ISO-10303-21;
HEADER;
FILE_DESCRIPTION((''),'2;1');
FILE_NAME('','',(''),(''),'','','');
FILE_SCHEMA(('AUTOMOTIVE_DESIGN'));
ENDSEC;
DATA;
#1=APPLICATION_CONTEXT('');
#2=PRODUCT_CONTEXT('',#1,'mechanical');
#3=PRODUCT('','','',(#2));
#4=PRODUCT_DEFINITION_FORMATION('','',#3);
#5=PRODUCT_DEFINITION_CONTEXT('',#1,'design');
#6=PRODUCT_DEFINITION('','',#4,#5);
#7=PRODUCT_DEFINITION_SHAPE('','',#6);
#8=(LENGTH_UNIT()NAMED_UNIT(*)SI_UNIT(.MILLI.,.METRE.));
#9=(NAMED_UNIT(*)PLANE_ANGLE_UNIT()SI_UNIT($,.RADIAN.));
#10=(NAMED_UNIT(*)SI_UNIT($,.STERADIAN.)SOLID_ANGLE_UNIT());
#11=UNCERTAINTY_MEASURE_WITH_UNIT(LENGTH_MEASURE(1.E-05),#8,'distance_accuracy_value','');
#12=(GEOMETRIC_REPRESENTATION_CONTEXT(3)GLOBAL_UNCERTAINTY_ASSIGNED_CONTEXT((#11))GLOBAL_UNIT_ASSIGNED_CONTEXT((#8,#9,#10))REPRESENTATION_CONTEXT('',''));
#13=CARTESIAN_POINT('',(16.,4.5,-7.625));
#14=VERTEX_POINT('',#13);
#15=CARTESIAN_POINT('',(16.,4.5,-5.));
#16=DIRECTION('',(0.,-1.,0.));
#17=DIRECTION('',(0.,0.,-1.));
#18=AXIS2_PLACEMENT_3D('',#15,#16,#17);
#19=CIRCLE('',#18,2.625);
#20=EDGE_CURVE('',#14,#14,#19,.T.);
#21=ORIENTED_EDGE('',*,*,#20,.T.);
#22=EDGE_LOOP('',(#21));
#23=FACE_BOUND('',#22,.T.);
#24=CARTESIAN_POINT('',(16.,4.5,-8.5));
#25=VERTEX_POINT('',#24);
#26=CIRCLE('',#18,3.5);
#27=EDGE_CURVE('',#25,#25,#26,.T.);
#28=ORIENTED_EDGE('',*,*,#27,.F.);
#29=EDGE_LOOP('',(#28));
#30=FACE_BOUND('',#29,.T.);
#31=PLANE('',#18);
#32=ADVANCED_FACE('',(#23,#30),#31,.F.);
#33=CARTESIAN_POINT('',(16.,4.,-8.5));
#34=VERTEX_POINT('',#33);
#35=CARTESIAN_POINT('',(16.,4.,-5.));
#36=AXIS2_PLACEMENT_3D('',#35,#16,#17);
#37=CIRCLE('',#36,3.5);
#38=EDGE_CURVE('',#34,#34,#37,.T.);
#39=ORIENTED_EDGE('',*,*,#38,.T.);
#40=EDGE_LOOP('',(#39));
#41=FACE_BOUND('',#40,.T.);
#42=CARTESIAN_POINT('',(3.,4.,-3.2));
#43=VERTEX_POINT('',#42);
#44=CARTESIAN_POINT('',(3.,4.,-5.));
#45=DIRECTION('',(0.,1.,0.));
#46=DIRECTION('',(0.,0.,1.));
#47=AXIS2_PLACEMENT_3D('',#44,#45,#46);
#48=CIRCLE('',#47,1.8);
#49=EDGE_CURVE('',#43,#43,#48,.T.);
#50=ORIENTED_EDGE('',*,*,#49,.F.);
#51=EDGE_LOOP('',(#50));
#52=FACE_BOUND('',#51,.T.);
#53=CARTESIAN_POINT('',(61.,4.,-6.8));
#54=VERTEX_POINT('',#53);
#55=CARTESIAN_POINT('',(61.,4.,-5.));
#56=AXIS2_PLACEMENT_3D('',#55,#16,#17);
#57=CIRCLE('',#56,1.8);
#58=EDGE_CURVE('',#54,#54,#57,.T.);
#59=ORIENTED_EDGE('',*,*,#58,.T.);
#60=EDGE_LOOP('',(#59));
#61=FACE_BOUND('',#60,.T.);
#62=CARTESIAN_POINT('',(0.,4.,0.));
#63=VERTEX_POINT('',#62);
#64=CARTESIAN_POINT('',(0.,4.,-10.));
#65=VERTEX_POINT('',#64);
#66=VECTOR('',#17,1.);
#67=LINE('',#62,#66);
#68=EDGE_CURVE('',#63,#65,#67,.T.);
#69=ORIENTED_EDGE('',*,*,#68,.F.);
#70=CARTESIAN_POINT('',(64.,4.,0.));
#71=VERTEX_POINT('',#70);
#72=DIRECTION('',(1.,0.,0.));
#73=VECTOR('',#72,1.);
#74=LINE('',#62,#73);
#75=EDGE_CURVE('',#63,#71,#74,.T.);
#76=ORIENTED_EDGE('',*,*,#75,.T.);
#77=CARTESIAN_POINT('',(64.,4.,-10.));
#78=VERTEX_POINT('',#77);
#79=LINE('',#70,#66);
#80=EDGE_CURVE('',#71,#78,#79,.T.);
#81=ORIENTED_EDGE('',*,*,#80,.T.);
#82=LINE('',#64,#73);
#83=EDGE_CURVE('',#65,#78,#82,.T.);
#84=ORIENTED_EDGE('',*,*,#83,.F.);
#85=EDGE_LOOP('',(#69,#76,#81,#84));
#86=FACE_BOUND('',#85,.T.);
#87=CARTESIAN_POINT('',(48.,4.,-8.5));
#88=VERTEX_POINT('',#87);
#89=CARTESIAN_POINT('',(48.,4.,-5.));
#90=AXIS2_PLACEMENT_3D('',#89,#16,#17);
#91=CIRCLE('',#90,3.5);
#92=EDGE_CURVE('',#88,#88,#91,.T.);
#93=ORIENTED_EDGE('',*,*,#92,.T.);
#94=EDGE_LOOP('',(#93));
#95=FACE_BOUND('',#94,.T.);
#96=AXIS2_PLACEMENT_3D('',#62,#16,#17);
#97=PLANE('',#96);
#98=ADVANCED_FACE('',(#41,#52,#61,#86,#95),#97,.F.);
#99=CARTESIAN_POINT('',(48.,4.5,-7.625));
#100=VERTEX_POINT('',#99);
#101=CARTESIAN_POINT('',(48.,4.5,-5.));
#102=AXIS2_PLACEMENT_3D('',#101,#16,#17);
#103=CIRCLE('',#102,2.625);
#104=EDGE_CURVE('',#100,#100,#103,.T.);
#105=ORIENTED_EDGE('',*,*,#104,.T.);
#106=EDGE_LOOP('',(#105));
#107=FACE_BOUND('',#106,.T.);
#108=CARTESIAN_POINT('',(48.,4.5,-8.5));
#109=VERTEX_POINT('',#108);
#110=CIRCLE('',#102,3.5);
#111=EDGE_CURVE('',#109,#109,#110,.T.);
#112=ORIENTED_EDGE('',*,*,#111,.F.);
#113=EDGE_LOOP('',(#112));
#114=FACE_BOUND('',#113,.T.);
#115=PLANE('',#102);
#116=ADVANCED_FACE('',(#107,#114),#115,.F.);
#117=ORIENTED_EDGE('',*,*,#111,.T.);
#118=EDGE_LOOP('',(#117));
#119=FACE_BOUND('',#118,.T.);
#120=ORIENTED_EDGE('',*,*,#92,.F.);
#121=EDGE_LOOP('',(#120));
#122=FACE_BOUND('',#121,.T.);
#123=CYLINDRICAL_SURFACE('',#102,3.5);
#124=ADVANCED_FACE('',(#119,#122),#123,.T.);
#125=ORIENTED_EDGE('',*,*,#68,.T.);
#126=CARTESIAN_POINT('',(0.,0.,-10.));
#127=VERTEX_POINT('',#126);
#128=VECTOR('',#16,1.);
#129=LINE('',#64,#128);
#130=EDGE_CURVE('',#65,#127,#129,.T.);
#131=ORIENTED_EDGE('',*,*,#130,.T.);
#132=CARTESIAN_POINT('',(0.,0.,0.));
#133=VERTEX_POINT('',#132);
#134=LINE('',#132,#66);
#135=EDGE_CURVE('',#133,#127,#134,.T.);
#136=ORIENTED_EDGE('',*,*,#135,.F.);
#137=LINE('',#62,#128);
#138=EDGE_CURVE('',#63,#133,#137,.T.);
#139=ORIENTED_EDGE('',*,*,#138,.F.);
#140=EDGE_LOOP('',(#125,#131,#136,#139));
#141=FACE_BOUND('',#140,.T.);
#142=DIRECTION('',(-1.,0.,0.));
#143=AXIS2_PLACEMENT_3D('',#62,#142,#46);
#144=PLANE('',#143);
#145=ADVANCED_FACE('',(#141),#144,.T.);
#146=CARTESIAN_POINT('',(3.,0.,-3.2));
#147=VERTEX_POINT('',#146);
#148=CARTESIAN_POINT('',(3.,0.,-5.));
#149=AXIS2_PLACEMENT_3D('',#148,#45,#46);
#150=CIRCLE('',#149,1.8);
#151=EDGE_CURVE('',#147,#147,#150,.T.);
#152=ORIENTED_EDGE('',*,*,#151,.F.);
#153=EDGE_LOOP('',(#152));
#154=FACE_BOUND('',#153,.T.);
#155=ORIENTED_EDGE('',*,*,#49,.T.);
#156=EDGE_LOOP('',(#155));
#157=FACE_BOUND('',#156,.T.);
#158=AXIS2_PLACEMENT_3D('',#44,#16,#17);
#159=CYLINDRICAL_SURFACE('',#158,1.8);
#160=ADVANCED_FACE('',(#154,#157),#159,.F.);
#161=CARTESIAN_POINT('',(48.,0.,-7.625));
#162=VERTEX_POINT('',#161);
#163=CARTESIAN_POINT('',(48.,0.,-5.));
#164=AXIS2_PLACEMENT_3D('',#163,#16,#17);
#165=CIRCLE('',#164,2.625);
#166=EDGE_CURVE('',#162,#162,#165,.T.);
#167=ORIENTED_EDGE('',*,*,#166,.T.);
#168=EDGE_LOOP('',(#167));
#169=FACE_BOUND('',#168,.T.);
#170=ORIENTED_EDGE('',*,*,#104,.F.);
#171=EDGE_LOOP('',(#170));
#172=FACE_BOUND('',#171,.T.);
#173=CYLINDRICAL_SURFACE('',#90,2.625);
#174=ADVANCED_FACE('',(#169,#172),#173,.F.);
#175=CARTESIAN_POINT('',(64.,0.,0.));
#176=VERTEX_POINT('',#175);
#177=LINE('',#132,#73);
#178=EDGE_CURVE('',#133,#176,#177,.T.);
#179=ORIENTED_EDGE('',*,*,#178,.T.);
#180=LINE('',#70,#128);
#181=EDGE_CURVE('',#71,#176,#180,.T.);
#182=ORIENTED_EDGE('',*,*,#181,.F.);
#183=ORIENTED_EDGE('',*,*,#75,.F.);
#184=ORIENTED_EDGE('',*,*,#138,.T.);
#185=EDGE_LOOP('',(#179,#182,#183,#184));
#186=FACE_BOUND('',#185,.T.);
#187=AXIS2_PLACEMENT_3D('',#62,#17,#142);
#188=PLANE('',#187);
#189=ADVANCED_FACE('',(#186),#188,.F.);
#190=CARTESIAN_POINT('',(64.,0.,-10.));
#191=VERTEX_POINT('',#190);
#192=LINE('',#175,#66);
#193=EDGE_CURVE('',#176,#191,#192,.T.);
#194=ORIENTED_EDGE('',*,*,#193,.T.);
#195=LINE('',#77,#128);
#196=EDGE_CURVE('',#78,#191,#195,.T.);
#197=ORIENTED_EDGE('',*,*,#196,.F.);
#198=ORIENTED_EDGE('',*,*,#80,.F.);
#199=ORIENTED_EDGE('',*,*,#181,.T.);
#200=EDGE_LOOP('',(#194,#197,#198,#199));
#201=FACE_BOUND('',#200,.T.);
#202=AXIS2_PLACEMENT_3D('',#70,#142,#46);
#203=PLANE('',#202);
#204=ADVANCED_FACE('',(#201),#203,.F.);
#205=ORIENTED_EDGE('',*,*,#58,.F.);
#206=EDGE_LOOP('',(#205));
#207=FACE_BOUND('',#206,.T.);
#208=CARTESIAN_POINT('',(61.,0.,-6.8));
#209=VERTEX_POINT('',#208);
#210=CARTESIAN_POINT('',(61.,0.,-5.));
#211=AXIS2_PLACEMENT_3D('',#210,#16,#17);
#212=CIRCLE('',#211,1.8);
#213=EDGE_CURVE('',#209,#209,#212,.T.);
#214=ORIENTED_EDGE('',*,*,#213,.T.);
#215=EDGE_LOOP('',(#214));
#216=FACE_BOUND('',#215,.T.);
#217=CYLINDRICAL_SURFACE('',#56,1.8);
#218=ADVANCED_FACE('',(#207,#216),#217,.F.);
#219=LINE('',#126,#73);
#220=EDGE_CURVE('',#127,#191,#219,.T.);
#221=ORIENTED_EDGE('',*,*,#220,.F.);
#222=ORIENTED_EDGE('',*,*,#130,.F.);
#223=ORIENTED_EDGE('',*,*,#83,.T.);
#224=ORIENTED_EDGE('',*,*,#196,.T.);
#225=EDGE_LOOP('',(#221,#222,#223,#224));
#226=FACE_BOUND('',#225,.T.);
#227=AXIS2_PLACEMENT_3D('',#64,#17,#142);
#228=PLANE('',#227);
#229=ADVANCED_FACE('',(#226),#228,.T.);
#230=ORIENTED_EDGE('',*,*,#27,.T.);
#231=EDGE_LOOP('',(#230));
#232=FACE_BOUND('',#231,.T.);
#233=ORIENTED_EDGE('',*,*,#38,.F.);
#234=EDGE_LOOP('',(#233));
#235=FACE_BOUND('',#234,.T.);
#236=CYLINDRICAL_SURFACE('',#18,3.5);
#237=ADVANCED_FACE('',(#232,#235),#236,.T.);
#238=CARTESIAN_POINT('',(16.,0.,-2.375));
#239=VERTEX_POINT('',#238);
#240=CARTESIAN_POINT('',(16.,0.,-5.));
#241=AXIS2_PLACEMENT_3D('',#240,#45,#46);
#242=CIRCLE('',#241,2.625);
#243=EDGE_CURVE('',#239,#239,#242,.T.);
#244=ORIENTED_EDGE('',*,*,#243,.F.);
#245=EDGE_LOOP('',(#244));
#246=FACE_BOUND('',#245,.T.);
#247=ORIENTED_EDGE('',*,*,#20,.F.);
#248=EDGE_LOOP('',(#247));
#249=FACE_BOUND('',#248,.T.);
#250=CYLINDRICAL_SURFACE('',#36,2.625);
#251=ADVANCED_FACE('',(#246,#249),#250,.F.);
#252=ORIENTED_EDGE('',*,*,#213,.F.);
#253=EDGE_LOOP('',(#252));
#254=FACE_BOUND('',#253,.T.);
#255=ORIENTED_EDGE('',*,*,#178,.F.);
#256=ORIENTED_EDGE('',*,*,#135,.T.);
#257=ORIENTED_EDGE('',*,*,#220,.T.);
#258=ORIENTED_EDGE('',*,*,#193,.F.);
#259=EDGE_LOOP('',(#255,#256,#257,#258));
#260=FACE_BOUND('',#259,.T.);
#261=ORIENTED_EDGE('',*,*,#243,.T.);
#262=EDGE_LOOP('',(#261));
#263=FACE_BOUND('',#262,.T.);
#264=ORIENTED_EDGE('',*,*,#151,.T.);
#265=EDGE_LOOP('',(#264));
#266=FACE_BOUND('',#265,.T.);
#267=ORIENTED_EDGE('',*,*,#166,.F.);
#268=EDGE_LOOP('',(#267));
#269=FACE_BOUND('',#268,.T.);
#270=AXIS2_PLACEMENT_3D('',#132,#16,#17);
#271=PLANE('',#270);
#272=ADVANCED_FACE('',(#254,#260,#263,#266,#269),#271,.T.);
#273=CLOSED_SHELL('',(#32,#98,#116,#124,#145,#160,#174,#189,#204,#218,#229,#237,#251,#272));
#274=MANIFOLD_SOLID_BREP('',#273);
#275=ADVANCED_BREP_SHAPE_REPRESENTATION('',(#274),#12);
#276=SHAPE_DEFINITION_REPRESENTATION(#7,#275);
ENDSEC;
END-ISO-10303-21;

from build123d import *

# Parameters (mm, degrees)
SKETCH1_W                 = 64
SKETCH1_H                 = 10
SKETCH1_R                 = 1.8
SKETCH1_R_2               = 2.625
BOSS_EXTRUDE1_DEPTH       = 4
BOSS_EXTRUDE2_START       = 4
BOSS_EXTRUDE2_OUTLINE_R   = 3.5
BOSS_EXTRUDE2_OUTLINE_R_2 = 2.625
BOSS_EXTRUDE2_DEPTH       = 0.5


# Read off the part's stored shape, not the designer's step: Boss-Extrude2
with BuildPart() as part:
    # Sketch1 → Boss-Extrude1 (new body)
    with BuildSketch(Plane(origin=(0, 0, 0), x_dir=(1, 0, 0), z_dir=(0, 1, 0))):
        with Locations((32, 5)):
            Rectangle(SKETCH1_W, SKETCH1_H)
        with Locations(Location((3, 5, 0), (0, 0, 270))):
            Circle(SKETCH1_R, mode=Mode.SUBTRACT)
        with Locations(Location((16, 5, 0), (0, 0, 270))):
            Circle(SKETCH1_R_2, mode=Mode.SUBTRACT)
        with Locations(Location((61, 5, 0), (0, 0, 90))):
            Circle(SKETCH1_R, mode=Mode.SUBTRACT)
        with Locations(Location((48, 5, 0), (0, 0, 90))):
            Circle(SKETCH1_R_2, mode=Mode.SUBTRACT)
    extrude(amount=BOSS_EXTRUDE1_DEPTH)

    # Boss-Extrude2 outline → Boss-Extrude2 (add)
    # profile 1 of 2: a face of its own
    with BuildSketch(Plane(origin=(0, 0, 0), x_dir=(1, 0, 0), z_dir=(0, 1, 0)).offset(BOSS_EXTRUDE2_START)):
        with Locations((16, 5)):
            Circle(BOSS_EXTRUDE2_OUTLINE_R)
        with Locations((16, 5)):
            Circle(BOSS_EXTRUDE2_OUTLINE_R_2, mode=Mode.SUBTRACT)
    # profile 2 of 2: a face of its own
    with BuildSketch(Plane(origin=(0, 0, 0), x_dir=(1, 0, 0), z_dir=(0, 1, 0)).offset(BOSS_EXTRUDE2_START)):
        with Locations((48, 5)):
            Circle(BOSS_EXTRUDE2_OUTLINE_R)
        with Locations((48, 5)):
            Circle(BOSS_EXTRUDE2_OUTLINE_R_2, mode=Mode.SUBTRACT)
    extrude(amount=BOSS_EXTRUDE2_DEPTH)


solid = part.part
